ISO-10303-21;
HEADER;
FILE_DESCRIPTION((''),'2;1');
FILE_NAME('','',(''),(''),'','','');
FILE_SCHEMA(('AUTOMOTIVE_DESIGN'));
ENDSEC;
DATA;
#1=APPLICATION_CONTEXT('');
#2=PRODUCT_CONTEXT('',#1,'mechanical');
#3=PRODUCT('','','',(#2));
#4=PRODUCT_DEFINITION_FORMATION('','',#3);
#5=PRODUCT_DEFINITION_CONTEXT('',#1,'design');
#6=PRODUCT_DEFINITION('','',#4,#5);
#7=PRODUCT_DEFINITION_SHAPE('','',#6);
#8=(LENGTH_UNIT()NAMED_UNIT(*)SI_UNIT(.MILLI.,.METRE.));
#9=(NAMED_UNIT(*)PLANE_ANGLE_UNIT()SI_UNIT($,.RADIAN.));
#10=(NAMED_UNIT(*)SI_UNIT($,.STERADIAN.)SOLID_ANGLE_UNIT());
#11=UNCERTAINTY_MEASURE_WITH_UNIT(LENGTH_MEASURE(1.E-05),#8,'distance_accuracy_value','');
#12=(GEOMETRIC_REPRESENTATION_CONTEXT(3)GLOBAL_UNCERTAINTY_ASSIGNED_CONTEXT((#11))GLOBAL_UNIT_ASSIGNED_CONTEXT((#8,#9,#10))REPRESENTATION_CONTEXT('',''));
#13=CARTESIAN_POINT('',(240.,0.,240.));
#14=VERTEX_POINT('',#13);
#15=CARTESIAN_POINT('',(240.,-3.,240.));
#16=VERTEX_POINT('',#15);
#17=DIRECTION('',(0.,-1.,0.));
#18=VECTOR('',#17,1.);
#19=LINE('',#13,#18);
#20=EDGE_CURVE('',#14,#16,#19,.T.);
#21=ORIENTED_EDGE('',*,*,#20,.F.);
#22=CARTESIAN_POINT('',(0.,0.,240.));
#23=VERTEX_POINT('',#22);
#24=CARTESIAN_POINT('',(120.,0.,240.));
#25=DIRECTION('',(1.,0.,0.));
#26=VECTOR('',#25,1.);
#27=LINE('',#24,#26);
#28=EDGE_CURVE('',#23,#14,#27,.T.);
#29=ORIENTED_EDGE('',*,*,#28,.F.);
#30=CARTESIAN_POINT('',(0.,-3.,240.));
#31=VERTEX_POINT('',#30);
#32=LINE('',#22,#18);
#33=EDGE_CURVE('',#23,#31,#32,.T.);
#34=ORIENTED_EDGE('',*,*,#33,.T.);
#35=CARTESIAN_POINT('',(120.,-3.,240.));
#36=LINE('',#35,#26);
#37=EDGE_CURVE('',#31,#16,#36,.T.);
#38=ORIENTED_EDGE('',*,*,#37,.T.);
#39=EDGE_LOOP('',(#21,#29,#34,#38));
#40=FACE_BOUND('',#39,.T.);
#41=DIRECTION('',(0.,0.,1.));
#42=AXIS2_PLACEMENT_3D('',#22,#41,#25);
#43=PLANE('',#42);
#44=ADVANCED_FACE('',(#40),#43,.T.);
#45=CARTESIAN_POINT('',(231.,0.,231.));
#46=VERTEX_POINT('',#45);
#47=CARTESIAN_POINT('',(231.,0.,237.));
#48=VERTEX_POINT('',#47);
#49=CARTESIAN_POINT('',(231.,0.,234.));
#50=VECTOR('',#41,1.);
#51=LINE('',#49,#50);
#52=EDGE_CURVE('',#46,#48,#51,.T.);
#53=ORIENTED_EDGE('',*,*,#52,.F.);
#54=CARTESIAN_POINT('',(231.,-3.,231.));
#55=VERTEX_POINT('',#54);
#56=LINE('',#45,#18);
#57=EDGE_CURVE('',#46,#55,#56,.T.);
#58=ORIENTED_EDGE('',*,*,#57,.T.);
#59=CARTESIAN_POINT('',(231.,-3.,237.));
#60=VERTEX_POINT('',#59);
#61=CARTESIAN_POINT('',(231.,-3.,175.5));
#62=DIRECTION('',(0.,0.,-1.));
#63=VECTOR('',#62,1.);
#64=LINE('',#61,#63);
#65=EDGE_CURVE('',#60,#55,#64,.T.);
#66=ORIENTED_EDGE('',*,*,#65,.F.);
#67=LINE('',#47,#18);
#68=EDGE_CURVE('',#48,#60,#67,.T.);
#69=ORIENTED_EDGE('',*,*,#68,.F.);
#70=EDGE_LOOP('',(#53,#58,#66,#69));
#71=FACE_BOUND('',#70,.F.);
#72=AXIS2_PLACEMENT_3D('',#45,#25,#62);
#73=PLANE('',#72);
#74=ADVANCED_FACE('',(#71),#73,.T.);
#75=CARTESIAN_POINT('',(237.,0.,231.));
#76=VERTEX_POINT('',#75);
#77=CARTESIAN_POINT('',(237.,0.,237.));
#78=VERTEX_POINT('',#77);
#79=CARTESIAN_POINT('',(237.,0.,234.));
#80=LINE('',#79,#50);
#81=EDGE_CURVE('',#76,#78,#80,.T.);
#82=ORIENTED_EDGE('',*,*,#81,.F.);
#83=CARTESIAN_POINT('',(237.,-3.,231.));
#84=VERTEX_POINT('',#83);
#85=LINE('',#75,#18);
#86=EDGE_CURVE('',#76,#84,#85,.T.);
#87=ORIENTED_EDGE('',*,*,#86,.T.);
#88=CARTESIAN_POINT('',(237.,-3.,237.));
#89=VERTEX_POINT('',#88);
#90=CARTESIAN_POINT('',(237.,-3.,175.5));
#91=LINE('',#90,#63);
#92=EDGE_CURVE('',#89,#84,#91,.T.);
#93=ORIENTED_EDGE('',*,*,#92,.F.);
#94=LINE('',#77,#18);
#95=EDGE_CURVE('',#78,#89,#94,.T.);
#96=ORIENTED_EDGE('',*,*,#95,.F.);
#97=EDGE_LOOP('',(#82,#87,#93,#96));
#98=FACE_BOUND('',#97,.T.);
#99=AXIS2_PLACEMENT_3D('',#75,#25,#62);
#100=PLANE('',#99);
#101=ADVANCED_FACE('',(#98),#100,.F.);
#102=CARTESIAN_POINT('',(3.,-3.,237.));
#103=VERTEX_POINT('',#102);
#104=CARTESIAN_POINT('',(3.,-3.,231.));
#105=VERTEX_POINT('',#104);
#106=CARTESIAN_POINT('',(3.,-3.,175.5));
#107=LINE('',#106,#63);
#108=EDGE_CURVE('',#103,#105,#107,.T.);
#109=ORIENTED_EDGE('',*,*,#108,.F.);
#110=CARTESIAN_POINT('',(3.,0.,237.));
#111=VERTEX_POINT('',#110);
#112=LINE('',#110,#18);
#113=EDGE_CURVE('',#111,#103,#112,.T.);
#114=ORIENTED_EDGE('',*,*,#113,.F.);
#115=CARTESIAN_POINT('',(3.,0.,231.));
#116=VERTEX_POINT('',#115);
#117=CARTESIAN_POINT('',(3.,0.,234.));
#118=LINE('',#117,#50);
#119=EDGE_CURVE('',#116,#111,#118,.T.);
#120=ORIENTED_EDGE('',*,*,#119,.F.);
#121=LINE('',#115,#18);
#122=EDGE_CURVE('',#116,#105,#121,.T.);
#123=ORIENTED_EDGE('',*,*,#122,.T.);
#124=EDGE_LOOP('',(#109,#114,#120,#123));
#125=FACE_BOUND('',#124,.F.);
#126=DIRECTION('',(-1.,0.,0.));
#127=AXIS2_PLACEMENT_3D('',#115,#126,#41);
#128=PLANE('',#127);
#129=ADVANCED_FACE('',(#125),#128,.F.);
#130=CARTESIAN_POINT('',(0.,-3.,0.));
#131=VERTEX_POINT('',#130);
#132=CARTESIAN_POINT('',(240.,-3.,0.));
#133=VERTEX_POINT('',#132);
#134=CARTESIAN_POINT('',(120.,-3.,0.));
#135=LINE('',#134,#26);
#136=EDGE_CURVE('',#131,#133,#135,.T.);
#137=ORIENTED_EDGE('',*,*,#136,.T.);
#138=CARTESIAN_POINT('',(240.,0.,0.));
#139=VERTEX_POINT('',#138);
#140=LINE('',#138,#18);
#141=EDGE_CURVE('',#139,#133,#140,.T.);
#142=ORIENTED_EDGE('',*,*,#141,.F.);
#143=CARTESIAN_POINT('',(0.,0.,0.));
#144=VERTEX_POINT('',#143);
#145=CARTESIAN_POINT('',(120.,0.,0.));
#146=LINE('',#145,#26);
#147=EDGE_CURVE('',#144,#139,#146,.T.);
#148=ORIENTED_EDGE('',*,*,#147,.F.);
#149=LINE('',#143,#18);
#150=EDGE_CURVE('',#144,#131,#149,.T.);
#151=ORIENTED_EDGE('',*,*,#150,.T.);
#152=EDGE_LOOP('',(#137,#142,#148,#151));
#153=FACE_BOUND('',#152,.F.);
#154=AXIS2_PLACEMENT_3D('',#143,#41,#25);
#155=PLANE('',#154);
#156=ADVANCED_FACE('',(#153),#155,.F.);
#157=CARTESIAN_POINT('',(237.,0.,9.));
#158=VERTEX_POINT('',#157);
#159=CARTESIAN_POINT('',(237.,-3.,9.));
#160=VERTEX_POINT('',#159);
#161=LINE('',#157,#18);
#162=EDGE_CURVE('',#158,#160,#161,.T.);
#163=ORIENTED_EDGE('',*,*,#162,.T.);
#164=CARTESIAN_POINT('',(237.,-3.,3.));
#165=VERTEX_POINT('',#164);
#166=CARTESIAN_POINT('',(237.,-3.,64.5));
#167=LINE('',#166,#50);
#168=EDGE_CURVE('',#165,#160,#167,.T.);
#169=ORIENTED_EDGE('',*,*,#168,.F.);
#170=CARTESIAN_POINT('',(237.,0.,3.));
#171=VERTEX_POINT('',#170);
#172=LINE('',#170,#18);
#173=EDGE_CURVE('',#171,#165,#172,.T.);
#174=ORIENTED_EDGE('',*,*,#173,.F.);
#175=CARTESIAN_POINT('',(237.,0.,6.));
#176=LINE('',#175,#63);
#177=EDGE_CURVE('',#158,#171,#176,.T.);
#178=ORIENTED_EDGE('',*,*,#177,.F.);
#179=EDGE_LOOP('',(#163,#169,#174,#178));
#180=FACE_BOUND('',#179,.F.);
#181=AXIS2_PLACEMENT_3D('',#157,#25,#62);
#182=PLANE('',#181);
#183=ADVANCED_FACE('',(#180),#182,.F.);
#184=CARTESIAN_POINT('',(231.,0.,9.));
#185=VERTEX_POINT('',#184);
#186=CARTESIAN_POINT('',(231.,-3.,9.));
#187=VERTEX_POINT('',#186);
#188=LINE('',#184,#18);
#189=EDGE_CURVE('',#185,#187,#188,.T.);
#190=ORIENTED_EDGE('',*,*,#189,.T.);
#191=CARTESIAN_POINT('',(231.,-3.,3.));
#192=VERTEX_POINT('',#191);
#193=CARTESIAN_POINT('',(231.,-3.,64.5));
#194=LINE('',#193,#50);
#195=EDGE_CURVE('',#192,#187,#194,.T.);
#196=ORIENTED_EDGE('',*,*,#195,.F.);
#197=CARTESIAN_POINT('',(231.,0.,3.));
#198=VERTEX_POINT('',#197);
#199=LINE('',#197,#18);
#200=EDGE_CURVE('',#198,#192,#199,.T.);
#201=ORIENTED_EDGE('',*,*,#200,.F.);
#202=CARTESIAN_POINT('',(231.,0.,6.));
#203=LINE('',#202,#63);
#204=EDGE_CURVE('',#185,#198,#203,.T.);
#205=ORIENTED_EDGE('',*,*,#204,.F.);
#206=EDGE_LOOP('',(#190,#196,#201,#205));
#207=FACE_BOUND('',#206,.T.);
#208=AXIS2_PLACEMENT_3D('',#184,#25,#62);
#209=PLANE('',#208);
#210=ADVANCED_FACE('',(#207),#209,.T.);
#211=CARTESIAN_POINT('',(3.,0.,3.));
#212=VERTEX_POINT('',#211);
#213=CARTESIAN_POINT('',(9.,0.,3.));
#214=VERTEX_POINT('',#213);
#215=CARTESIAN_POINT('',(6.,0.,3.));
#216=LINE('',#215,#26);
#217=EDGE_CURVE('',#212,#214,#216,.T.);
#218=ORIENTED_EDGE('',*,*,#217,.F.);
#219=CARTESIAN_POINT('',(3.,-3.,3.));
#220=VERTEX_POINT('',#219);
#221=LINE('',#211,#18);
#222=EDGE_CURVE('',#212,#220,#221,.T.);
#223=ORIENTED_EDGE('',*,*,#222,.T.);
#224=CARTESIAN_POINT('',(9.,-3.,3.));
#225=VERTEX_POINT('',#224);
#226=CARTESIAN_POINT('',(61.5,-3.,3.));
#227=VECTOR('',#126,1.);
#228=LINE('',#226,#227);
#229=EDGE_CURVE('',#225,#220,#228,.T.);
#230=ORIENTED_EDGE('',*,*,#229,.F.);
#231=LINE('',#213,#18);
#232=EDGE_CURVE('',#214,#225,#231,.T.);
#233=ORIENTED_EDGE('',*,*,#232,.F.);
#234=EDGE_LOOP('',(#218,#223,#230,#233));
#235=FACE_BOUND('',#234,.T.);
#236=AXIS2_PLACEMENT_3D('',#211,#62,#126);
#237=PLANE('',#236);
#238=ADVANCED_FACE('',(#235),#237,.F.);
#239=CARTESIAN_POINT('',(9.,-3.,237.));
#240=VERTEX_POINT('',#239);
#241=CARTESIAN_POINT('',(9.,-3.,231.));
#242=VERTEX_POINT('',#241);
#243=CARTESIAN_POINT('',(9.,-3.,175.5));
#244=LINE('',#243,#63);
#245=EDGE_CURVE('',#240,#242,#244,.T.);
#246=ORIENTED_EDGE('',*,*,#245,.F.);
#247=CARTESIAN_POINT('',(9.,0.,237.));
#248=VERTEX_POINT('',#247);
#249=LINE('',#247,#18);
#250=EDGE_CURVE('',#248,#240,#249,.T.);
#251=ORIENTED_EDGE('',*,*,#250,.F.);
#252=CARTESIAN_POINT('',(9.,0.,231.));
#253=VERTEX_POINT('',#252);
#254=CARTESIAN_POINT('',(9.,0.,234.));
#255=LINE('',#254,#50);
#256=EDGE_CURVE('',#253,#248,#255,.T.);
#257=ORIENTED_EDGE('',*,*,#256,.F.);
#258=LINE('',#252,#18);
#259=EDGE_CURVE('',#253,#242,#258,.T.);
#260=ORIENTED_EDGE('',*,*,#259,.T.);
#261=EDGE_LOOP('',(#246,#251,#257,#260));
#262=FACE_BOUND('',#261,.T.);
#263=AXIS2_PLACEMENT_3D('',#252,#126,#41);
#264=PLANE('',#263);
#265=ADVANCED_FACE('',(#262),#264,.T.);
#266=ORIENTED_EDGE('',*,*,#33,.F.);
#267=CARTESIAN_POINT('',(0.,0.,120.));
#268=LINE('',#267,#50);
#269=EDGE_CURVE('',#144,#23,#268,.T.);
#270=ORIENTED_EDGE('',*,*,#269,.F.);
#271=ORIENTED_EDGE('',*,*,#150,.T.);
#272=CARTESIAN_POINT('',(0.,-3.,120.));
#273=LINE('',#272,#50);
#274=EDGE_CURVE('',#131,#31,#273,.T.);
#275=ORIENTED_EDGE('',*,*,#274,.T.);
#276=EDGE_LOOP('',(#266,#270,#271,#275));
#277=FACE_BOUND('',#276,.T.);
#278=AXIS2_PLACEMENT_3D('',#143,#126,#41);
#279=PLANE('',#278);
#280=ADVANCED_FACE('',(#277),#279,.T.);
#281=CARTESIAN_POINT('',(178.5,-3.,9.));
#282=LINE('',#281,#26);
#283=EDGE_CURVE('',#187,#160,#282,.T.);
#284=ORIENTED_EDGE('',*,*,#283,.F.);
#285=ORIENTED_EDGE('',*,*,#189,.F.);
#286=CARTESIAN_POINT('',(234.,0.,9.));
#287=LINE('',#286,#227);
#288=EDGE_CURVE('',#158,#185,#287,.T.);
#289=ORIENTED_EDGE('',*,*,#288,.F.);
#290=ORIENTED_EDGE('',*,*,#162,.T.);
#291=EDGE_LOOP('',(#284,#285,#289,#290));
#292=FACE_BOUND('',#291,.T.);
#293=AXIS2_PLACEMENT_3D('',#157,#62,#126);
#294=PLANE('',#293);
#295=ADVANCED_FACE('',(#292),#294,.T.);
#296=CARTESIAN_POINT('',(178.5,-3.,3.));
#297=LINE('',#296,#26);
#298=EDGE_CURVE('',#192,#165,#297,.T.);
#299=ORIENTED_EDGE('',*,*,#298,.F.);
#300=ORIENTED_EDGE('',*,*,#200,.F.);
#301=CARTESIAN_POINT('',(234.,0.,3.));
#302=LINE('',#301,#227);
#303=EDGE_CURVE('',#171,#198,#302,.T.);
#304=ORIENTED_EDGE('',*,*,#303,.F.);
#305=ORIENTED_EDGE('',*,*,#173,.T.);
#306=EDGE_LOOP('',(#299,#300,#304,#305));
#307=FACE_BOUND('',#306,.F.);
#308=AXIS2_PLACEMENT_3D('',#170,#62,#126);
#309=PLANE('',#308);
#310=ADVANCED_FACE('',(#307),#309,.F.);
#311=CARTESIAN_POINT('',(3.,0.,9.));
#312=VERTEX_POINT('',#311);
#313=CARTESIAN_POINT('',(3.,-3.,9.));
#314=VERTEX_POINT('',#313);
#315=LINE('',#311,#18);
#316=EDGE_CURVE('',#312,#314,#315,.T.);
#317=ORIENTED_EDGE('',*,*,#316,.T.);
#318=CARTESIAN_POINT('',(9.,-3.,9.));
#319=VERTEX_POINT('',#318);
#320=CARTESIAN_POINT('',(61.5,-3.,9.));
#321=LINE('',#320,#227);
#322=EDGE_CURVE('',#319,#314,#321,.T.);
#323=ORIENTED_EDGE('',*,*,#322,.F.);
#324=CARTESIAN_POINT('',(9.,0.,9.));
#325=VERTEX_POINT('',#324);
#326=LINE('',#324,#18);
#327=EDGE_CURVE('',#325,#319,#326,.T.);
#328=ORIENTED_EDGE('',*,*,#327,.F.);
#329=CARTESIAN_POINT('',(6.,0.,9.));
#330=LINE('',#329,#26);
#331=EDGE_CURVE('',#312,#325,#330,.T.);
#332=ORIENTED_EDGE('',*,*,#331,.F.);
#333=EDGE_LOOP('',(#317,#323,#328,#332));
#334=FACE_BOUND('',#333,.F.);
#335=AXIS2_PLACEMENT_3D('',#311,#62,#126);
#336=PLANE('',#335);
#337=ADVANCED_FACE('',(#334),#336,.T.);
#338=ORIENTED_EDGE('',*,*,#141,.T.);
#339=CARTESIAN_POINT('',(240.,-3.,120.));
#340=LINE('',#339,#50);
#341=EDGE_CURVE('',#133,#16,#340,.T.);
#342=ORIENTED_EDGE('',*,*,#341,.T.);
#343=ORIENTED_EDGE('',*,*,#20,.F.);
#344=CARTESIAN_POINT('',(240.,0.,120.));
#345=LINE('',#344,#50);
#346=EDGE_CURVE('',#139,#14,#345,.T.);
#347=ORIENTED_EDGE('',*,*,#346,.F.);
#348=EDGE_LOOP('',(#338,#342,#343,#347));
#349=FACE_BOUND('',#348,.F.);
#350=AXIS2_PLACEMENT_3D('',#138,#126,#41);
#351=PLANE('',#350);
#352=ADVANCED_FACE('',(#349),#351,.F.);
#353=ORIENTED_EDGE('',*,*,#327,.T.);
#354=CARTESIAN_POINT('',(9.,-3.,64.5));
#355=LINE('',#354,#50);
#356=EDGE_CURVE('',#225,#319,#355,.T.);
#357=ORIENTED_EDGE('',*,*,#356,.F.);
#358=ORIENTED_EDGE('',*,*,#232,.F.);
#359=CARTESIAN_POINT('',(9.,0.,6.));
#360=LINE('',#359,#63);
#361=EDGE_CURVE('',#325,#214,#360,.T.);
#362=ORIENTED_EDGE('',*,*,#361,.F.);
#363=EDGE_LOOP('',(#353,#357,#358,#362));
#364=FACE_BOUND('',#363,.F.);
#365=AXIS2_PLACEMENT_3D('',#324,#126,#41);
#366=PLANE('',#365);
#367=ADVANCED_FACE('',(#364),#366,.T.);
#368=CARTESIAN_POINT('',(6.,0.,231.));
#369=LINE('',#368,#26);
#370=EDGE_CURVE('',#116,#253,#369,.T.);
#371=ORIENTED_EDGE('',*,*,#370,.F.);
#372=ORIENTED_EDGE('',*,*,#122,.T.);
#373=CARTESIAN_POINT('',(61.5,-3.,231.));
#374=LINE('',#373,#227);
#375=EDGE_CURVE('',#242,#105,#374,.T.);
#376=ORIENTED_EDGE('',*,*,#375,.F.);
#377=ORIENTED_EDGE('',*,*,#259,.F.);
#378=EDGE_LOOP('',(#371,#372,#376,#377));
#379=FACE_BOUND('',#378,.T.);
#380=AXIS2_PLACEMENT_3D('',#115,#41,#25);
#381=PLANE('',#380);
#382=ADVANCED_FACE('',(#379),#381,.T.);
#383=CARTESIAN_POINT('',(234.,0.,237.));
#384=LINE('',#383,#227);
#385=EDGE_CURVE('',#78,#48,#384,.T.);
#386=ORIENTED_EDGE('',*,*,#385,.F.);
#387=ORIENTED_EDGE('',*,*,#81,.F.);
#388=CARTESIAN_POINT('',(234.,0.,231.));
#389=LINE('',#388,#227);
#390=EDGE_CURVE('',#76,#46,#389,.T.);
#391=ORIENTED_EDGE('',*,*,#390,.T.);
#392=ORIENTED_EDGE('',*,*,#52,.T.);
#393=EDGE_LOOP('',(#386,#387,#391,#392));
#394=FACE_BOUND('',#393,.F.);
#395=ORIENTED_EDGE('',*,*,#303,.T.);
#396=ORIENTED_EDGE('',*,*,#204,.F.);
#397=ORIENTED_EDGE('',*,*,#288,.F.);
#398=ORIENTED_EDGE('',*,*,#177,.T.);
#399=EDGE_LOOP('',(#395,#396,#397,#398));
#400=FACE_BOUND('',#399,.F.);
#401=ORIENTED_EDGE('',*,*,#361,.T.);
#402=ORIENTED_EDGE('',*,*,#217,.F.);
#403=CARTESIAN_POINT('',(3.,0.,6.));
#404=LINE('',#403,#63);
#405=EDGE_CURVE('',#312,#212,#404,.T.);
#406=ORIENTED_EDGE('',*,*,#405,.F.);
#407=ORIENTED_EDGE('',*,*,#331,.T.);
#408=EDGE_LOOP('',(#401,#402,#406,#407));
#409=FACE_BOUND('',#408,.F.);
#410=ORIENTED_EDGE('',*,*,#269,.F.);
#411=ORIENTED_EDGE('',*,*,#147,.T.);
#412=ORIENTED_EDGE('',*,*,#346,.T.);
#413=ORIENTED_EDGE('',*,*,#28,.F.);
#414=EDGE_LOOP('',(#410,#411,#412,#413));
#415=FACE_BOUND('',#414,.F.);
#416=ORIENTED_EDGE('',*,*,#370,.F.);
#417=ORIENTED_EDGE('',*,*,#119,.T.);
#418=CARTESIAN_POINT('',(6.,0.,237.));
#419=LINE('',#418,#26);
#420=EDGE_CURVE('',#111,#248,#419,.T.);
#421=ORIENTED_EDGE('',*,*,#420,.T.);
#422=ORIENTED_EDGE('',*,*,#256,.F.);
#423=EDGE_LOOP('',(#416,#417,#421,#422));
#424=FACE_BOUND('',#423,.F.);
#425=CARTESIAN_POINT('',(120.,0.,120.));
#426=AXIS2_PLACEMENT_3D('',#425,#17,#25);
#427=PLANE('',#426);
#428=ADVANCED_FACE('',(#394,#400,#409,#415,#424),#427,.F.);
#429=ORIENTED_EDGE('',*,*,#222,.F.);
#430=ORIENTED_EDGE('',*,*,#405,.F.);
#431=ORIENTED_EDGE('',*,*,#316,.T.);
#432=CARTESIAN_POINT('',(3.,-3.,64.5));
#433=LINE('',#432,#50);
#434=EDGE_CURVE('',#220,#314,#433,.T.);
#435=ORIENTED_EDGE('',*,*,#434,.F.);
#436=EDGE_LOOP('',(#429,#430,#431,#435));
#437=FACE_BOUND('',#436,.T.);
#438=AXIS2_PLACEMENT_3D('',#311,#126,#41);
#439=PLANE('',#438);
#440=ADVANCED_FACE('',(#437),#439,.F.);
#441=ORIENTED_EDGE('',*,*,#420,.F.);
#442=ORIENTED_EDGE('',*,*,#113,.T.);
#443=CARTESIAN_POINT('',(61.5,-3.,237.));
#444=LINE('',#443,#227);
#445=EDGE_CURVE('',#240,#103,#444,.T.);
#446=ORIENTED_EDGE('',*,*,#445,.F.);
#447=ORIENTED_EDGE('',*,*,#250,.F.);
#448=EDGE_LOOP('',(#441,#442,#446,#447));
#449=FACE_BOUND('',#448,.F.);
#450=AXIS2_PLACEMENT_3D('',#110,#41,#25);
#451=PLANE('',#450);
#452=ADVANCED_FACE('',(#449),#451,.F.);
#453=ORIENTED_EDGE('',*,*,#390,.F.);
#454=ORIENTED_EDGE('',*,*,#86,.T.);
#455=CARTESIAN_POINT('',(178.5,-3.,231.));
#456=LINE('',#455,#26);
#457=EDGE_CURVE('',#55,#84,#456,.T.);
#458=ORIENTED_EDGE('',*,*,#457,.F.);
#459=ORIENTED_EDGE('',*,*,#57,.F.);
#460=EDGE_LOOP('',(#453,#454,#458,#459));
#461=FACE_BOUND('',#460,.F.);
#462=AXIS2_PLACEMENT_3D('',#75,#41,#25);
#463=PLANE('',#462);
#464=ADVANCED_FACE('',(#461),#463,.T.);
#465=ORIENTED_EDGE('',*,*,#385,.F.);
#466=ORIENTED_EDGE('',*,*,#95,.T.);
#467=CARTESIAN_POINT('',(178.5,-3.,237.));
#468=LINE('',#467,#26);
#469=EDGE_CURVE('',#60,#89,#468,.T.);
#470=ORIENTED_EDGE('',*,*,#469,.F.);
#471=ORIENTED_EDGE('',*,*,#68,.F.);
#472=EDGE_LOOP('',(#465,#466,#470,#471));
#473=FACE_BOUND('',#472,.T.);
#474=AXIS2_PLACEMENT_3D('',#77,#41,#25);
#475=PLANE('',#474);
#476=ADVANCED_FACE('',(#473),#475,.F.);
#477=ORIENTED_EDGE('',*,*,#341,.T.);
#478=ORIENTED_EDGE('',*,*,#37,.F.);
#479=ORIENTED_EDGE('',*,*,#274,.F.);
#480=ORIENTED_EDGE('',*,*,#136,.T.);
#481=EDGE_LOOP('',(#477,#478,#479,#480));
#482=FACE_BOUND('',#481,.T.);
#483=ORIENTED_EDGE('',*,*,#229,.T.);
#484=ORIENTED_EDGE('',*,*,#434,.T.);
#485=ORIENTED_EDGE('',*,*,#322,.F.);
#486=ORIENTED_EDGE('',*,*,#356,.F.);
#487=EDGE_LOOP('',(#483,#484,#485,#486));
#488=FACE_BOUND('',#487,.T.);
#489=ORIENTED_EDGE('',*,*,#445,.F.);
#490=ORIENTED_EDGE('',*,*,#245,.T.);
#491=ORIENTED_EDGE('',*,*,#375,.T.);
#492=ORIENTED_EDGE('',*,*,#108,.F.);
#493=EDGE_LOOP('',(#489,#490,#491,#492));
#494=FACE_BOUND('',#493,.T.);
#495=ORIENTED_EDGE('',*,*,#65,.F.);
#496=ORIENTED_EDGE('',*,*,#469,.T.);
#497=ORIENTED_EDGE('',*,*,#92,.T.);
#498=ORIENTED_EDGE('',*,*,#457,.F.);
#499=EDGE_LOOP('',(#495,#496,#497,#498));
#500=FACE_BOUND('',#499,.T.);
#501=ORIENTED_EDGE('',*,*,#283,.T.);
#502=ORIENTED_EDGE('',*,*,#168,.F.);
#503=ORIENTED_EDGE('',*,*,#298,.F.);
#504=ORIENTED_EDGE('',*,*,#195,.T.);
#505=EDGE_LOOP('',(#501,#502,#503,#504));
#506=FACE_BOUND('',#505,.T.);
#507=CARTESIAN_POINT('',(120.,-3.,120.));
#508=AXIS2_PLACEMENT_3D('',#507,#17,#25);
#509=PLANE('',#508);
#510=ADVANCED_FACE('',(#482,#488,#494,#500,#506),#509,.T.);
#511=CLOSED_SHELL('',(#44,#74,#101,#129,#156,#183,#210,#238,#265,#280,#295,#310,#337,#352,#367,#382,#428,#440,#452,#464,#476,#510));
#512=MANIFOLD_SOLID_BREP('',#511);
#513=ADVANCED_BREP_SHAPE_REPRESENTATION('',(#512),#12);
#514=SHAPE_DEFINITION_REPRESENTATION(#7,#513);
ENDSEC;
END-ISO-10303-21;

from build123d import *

# Parameters (mm, degrees)
F1_W     = 240
F1_H     = 240
F1_W_2   = 6
F1_H_2   = 6
F2_DEPTH = 3
F3_DEPTH = 25


with BuildPart() as f2:
    # F1 (on Front) → F2 (new body)
    with BuildSketch(Plane.XZ):
        with Locations((120, 120)):
            Rectangle(F1_W, F1_H)
        with Locations((6, 234)):
            Rectangle(F1_W_2, F1_H_2, mode=Mode.SUBTRACT)
        with Locations((6, 234)):
            Rectangle(F1_W_2, F1_H_2)
    extrude(amount=F2_DEPTH)

    # F1 (on Front) → F3 (cut)
    with BuildSketch(Plane.XZ):
        with Locations((6, 234)):
            Rectangle(F1_W_2, F1_H_2)
    extrude(amount=F3_DEPTH, mode=Mode.SUBTRACT)

    # F5: F2 across plane


with BuildPart() as f2_1:
    add(f2.part)
    add(f2.part.mirror(Plane(origin=(120, -1.5, 120), x_dir=(0, -1, 0), z_dir=(-1, 0, 0))), mode=Mode.INTERSECT)

    # F7: F2 across plane


with BuildPart() as f2_2:
    add(f2_1.part)
    add(f2_1.part.mirror(Plane(origin=(120, -1.5, 120), x_dir=(1, 0, 0), z_dir=(0, 0, 1))), mode=Mode.INTERSECT)


solid = f2_2.part
